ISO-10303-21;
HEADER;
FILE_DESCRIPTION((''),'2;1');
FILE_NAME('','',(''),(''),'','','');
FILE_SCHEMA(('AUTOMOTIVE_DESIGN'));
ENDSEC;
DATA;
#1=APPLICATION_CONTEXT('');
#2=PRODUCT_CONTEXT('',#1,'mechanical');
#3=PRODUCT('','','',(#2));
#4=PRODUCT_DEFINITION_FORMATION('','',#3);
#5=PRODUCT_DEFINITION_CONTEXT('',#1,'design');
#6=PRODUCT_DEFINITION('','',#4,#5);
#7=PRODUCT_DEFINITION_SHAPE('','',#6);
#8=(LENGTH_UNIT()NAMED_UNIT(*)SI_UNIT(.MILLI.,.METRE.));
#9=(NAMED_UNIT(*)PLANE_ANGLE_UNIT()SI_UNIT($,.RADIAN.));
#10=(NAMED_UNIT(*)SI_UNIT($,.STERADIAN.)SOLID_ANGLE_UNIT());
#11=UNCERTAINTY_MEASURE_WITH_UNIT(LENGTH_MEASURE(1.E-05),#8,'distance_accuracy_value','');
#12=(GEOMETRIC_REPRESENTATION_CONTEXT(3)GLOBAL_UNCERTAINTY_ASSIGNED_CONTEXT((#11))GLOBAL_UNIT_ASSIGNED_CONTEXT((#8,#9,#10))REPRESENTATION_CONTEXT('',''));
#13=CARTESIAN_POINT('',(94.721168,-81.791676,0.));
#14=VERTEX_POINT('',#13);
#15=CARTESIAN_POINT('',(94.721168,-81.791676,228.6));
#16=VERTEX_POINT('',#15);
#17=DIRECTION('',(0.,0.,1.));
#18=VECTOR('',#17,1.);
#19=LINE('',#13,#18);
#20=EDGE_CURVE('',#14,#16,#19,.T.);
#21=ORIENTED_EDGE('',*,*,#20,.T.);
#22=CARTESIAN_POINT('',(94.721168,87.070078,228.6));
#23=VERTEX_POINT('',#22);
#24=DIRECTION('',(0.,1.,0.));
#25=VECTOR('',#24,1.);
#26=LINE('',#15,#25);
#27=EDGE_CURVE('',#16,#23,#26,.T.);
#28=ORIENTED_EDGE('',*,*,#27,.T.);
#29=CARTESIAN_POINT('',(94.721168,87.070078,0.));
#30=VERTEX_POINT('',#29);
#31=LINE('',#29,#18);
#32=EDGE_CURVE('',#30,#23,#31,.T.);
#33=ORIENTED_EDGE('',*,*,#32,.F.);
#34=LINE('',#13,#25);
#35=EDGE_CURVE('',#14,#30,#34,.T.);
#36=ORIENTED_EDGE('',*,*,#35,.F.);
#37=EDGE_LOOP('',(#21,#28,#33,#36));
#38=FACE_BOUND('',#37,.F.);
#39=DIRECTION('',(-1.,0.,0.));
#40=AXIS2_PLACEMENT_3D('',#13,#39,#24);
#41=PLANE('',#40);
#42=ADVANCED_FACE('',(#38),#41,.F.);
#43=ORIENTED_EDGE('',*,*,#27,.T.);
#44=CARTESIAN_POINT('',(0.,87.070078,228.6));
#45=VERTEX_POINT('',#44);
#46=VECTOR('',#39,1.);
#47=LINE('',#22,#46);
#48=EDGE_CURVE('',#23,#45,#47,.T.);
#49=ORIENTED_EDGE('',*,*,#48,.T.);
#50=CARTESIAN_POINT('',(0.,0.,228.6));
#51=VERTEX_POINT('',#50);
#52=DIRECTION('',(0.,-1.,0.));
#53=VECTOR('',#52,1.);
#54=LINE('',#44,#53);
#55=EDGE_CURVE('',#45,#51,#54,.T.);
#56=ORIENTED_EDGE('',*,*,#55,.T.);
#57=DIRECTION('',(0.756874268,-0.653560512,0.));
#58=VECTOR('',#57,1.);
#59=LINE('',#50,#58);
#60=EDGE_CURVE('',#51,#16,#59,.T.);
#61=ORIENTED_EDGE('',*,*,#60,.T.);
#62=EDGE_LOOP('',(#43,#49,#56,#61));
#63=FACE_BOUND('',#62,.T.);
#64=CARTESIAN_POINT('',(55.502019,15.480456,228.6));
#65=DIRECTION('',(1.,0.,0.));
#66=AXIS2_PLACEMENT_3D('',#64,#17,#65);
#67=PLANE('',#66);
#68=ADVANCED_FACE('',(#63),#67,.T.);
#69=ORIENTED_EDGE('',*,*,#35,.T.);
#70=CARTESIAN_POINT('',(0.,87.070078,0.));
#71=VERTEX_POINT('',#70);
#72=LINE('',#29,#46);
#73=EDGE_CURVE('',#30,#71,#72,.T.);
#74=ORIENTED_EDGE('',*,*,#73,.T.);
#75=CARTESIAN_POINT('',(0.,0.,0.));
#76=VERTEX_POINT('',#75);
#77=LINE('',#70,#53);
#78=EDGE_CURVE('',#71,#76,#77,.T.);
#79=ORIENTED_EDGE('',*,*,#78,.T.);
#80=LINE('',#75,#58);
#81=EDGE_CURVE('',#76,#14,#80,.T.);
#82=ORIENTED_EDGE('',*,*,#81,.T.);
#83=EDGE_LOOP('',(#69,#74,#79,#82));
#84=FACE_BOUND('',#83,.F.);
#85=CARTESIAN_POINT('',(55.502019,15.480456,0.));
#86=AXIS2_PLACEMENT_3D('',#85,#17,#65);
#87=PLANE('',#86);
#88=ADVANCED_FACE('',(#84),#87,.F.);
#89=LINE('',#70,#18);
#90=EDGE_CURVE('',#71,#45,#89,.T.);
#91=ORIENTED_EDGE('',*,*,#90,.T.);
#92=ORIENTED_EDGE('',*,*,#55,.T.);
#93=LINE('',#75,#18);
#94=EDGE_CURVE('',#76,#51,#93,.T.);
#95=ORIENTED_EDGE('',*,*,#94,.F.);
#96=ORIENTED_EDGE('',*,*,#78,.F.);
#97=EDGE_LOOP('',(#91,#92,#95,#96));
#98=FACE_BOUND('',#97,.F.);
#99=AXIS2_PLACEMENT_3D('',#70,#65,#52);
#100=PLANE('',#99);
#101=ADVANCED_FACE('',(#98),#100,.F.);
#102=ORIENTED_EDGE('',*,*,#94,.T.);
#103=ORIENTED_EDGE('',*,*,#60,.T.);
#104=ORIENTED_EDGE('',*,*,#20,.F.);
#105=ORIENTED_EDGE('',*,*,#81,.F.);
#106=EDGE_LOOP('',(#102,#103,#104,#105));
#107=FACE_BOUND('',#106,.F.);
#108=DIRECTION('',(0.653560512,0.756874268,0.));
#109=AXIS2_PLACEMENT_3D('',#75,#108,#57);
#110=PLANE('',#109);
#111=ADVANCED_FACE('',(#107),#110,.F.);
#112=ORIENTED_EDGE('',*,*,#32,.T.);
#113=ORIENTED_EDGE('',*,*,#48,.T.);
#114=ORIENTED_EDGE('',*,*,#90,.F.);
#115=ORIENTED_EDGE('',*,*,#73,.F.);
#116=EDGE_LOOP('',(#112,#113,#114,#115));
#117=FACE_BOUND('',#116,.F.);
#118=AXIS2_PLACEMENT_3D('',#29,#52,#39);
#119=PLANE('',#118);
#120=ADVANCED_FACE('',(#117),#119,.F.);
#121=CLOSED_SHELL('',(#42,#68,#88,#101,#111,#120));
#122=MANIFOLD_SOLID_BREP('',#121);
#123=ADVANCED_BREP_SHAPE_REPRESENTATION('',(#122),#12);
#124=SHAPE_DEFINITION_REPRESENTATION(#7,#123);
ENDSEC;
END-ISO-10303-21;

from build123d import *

# Parameters (mm, degrees)
F3_DEPTH = 228.6


# Not quite as in the source:
# - the program builds the solid bodies; features that only make, move or delete a surface that nothing else refers to are left out


with BuildPart() as f3:
    # F2 (on face) → F3 (new body)
    with BuildSketch(Plane.XY):
        Polygon((0, 87.0700776577), (0, 0), (94.7211682796, -81.7916764111), (94.7211682796, 87.0700776577), align=None)
    extrude(amount=F3_DEPTH)


solid = f3.part
